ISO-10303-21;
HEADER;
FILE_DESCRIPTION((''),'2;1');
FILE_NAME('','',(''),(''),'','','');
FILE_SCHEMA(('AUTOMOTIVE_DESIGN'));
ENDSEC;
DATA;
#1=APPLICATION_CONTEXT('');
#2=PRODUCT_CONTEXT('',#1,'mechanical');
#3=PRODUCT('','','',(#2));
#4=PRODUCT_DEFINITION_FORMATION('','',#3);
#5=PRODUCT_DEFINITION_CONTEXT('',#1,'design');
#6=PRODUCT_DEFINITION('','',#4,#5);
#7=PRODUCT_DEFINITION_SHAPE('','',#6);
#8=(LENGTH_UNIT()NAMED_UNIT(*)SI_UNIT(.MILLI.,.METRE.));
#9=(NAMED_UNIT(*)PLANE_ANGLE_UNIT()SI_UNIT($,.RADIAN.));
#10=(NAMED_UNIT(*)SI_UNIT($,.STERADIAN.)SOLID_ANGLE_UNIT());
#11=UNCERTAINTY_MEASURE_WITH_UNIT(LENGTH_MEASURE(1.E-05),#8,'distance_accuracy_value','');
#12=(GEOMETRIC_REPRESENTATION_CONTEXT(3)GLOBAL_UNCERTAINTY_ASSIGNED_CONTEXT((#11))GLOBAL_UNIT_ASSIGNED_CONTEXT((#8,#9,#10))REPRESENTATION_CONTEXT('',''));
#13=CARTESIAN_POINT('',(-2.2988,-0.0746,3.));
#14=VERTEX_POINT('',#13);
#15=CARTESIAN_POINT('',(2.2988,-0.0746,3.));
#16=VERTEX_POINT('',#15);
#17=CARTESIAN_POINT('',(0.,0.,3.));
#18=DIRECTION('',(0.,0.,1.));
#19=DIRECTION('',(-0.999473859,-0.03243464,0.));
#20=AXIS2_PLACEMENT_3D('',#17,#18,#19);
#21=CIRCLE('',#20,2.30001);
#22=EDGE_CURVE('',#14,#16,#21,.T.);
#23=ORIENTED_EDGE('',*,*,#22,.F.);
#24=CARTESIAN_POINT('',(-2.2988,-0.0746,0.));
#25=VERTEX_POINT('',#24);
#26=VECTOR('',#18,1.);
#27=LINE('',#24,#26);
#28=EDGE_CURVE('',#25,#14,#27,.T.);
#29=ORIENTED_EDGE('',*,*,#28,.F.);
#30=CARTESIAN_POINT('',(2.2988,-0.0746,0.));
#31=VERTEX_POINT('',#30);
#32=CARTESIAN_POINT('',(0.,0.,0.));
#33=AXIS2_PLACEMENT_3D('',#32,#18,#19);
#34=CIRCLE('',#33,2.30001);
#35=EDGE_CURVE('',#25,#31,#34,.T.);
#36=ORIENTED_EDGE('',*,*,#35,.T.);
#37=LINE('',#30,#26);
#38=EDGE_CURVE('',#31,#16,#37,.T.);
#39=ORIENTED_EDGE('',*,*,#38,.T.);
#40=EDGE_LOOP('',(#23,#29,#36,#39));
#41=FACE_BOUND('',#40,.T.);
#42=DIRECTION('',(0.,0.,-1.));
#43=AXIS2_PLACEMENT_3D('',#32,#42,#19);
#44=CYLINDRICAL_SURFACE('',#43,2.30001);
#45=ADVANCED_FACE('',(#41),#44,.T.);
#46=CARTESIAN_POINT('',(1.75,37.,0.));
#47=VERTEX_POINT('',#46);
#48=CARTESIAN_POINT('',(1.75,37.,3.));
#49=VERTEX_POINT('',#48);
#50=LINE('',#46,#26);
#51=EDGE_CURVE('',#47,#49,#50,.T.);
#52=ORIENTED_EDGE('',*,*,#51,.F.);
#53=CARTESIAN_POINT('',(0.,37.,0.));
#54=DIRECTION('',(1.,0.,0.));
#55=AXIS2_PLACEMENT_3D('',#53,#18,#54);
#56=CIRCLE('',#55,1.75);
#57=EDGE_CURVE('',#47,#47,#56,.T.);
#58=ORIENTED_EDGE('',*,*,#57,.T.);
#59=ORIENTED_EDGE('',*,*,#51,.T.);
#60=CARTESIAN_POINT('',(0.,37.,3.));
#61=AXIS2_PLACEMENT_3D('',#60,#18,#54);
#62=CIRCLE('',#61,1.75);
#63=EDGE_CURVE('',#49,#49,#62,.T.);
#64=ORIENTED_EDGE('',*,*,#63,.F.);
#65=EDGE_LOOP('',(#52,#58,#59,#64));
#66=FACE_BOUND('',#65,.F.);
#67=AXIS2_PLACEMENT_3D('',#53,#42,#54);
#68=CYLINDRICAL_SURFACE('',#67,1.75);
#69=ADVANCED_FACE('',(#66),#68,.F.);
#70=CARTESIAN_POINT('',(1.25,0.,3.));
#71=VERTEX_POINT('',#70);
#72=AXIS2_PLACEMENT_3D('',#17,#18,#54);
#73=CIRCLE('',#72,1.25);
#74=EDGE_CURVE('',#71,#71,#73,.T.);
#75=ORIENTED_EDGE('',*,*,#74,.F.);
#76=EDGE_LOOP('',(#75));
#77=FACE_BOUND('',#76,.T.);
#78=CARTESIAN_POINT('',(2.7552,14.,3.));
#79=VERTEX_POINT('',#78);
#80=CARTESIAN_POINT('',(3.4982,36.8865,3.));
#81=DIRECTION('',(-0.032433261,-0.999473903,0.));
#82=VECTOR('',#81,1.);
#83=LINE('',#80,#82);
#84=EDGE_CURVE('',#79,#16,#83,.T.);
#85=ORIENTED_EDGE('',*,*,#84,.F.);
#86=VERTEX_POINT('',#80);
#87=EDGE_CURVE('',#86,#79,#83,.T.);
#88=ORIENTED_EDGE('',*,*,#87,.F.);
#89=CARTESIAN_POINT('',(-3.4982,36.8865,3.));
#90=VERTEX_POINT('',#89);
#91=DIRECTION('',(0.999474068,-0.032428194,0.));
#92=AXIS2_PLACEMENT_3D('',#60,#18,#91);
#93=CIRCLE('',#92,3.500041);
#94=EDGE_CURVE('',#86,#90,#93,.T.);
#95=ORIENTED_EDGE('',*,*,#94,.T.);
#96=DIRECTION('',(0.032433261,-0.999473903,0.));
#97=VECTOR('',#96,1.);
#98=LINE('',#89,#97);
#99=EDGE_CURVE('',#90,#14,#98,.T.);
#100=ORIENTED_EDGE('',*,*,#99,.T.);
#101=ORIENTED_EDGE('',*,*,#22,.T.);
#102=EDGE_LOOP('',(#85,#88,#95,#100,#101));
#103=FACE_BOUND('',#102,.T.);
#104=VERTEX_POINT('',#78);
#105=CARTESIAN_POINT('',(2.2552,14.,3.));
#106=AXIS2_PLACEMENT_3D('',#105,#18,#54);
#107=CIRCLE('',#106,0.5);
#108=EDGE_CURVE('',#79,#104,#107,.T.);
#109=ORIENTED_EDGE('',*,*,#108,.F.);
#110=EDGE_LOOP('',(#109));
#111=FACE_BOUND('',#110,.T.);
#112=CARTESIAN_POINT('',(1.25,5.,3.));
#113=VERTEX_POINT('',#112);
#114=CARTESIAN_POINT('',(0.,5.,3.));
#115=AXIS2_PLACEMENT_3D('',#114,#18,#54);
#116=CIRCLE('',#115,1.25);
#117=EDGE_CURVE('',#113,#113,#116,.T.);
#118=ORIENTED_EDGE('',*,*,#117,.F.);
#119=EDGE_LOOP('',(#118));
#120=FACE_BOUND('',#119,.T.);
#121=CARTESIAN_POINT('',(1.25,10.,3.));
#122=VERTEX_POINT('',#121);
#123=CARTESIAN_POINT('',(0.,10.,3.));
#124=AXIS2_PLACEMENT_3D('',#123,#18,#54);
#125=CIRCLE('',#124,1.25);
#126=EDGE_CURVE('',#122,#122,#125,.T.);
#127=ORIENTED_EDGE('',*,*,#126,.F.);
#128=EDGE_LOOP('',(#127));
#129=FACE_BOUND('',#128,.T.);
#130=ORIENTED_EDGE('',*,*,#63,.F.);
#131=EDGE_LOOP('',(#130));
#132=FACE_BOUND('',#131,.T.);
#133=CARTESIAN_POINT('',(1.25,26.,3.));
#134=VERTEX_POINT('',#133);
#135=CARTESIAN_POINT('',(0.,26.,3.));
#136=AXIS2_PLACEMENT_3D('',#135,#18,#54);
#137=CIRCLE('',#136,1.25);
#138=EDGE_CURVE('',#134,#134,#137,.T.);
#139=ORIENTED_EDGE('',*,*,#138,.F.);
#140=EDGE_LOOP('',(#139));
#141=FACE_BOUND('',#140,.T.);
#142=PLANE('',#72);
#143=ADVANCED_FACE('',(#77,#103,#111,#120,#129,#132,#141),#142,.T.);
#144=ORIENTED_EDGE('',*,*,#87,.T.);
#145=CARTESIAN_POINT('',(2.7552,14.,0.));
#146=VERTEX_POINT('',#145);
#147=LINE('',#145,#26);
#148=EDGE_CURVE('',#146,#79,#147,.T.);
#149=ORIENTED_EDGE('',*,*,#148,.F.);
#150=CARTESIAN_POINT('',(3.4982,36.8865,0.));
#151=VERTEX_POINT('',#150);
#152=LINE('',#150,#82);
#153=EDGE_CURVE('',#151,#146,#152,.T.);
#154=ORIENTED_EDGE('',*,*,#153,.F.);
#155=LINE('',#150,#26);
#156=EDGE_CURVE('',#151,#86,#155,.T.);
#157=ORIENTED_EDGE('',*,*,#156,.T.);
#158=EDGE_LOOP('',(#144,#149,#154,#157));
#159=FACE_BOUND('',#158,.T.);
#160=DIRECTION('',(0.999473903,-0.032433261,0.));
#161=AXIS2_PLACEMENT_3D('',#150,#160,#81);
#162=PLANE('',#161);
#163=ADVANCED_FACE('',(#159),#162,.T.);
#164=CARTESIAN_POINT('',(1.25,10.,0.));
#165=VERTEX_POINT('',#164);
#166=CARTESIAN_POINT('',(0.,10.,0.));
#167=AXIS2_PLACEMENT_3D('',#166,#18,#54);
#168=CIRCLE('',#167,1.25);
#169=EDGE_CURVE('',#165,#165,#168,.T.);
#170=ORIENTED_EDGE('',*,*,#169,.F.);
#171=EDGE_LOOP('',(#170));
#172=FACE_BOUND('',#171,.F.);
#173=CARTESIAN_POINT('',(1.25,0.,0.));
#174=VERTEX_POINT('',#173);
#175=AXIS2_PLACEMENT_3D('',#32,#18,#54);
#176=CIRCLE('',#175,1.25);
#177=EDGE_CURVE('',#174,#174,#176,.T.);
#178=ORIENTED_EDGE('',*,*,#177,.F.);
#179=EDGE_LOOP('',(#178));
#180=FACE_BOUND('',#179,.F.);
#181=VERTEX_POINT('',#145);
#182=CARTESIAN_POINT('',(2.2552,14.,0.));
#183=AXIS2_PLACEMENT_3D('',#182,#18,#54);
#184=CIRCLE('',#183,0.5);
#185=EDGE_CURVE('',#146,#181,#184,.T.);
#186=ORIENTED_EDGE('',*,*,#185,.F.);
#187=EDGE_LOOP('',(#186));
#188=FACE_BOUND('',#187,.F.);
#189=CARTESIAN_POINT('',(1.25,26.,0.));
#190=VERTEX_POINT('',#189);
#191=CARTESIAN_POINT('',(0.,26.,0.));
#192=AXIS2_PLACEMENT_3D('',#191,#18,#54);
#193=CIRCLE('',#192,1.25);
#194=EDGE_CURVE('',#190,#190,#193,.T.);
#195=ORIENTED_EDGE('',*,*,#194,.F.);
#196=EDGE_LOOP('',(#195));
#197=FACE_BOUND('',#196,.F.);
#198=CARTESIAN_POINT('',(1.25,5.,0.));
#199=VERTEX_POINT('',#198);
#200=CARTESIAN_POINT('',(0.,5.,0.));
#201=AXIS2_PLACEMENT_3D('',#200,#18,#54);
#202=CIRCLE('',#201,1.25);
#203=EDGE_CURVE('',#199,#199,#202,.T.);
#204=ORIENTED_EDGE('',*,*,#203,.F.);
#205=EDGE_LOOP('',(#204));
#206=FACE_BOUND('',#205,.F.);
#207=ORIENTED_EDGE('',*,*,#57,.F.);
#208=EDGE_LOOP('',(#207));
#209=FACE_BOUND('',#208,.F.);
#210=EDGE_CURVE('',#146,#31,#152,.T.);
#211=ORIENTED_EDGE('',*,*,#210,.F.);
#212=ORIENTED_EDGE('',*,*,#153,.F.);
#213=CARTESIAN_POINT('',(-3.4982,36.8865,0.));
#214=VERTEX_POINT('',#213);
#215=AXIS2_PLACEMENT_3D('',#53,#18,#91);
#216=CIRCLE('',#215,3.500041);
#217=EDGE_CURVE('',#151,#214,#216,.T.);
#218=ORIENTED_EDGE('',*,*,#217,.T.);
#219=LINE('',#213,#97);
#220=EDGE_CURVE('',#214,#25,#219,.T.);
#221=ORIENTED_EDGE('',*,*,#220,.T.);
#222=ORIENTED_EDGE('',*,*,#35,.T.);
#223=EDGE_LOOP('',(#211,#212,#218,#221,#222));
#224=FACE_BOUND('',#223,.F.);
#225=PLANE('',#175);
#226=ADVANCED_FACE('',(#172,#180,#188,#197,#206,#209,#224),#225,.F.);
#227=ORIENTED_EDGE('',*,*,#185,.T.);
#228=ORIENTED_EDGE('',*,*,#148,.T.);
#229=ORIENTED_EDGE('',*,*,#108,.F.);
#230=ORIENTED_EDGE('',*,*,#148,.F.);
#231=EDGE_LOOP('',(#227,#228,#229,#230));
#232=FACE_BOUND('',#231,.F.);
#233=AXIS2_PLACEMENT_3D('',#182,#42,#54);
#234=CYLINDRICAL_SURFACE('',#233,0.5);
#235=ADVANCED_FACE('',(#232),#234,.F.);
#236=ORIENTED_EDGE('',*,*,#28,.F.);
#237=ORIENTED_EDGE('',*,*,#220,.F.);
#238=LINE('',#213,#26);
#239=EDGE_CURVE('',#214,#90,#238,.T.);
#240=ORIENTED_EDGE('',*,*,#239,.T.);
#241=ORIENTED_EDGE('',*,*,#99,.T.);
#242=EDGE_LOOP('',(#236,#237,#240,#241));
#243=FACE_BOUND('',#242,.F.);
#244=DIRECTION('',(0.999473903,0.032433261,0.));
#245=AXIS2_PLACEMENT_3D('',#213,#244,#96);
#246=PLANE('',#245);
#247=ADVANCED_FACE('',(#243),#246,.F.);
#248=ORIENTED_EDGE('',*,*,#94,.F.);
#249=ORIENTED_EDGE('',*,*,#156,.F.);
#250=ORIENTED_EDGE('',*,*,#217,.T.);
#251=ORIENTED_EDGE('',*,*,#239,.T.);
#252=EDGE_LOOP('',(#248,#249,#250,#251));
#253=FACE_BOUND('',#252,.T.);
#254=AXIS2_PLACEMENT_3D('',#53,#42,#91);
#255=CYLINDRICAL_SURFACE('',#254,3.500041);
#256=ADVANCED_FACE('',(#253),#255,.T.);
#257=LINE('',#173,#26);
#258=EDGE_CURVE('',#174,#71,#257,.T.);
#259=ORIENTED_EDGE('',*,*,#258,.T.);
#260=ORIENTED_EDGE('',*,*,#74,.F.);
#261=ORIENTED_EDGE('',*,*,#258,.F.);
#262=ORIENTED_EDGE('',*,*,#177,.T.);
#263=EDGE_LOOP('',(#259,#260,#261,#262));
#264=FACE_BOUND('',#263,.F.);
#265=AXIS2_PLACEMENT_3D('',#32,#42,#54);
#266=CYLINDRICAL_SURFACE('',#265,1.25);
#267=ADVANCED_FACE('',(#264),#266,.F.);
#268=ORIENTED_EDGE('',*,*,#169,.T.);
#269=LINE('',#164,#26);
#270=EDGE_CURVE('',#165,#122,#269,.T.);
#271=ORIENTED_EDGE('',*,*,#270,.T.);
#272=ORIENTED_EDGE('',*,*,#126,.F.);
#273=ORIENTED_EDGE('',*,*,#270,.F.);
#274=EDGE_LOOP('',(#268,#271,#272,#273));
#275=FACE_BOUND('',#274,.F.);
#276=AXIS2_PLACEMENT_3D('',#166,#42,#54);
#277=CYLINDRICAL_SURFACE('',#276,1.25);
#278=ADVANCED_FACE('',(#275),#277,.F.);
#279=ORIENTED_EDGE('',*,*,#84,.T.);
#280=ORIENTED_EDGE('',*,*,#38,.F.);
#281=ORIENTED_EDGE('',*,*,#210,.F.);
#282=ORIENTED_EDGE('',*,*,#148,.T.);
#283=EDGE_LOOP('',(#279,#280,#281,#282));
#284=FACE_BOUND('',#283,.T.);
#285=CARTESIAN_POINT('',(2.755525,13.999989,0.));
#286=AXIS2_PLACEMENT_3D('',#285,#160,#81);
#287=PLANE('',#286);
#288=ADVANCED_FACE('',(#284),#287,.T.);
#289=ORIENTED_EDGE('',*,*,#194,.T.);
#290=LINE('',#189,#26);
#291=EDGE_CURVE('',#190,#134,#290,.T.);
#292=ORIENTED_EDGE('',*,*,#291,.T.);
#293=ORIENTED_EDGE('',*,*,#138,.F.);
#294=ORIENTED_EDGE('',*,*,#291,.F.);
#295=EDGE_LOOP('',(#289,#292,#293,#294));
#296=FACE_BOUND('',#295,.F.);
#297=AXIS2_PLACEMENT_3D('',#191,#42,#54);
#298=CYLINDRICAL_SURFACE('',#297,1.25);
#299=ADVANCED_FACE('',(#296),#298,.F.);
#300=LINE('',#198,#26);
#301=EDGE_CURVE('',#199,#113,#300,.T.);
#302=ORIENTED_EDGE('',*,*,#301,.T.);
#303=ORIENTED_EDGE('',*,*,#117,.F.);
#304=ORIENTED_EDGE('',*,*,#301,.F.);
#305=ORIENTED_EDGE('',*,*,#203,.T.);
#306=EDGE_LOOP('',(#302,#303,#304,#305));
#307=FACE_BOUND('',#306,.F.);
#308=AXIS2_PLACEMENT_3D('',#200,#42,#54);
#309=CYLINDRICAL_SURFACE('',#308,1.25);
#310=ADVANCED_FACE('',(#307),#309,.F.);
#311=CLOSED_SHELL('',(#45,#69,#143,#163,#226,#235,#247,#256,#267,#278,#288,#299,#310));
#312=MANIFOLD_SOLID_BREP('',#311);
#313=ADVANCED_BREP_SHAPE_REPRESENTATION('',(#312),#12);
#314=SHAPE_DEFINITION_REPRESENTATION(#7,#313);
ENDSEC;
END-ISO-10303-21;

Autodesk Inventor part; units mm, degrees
ref_plane "YZ Plane" through (0, 0, 0) normal (1, 0, 0) x (0, 1, 0)
ref_plane "XZ Plane" through (0, 0, 0) normal (0, 1, 0) x (-1, 0, 0)
ref_plane "XY Plane" through (0, 0, 0) normal (0, 0, 1) x (1, 0, 0)
sketch "Boceto1" plane through (0, 0, 0) normal (0, 0, 1) x (1, 0, 0)
  circle A0 centre (0, 0) radius 1.25
  arc A1 (-2.2988, -0.0746) -> (2.2988, -0.0746) centre (0, 0) ccw
  arc A2 (3.4982, 36.8865) -> (-3.4982, 36.8865) centre (0, 37) ccw
  circle A3 centre (0, 37) radius 1.75
  line L0 (0, 0) -> (0, 37) construction
  line L1 (-3.4982, 36.8865) -> (-2.2988, -0.0746)
  line L2 (3.4982, 36.8865) -> (2.2988, -0.0746)
  circle A4 centre (0, 5) radius 1.25
  circle A5 centre (0, 10) radius 1.25
  circle A6 centre (0, 26) radius 1.25
  circle A7 centre (2.2552, 14) radius 0.5
  point P0 (2.755, 13.9838)
  dimension "d0" = 37
  dimension "d1" = 7
  dimension "d2" = 3.5
  dimension "d3" = 4.6
  dimension "d4" = 2.5
  dimension "d5" = 2.5
  dimension "d6" = 2.5
  dimension "d7" = 2.5
  dimension "d8" = 5
  dimension "d9" = 5
  dimension "d10" = 4
  dimension "d11" = 1
  dimension "d12" = 12
extrude "Extrusión1" add sketch "Boceto1" along normal blind 3
equation "\"d5\" = d4"
equation "\"d6\" = d4"
equation "\"d7\" = d4"
properties part number "Hudson 1-65"
